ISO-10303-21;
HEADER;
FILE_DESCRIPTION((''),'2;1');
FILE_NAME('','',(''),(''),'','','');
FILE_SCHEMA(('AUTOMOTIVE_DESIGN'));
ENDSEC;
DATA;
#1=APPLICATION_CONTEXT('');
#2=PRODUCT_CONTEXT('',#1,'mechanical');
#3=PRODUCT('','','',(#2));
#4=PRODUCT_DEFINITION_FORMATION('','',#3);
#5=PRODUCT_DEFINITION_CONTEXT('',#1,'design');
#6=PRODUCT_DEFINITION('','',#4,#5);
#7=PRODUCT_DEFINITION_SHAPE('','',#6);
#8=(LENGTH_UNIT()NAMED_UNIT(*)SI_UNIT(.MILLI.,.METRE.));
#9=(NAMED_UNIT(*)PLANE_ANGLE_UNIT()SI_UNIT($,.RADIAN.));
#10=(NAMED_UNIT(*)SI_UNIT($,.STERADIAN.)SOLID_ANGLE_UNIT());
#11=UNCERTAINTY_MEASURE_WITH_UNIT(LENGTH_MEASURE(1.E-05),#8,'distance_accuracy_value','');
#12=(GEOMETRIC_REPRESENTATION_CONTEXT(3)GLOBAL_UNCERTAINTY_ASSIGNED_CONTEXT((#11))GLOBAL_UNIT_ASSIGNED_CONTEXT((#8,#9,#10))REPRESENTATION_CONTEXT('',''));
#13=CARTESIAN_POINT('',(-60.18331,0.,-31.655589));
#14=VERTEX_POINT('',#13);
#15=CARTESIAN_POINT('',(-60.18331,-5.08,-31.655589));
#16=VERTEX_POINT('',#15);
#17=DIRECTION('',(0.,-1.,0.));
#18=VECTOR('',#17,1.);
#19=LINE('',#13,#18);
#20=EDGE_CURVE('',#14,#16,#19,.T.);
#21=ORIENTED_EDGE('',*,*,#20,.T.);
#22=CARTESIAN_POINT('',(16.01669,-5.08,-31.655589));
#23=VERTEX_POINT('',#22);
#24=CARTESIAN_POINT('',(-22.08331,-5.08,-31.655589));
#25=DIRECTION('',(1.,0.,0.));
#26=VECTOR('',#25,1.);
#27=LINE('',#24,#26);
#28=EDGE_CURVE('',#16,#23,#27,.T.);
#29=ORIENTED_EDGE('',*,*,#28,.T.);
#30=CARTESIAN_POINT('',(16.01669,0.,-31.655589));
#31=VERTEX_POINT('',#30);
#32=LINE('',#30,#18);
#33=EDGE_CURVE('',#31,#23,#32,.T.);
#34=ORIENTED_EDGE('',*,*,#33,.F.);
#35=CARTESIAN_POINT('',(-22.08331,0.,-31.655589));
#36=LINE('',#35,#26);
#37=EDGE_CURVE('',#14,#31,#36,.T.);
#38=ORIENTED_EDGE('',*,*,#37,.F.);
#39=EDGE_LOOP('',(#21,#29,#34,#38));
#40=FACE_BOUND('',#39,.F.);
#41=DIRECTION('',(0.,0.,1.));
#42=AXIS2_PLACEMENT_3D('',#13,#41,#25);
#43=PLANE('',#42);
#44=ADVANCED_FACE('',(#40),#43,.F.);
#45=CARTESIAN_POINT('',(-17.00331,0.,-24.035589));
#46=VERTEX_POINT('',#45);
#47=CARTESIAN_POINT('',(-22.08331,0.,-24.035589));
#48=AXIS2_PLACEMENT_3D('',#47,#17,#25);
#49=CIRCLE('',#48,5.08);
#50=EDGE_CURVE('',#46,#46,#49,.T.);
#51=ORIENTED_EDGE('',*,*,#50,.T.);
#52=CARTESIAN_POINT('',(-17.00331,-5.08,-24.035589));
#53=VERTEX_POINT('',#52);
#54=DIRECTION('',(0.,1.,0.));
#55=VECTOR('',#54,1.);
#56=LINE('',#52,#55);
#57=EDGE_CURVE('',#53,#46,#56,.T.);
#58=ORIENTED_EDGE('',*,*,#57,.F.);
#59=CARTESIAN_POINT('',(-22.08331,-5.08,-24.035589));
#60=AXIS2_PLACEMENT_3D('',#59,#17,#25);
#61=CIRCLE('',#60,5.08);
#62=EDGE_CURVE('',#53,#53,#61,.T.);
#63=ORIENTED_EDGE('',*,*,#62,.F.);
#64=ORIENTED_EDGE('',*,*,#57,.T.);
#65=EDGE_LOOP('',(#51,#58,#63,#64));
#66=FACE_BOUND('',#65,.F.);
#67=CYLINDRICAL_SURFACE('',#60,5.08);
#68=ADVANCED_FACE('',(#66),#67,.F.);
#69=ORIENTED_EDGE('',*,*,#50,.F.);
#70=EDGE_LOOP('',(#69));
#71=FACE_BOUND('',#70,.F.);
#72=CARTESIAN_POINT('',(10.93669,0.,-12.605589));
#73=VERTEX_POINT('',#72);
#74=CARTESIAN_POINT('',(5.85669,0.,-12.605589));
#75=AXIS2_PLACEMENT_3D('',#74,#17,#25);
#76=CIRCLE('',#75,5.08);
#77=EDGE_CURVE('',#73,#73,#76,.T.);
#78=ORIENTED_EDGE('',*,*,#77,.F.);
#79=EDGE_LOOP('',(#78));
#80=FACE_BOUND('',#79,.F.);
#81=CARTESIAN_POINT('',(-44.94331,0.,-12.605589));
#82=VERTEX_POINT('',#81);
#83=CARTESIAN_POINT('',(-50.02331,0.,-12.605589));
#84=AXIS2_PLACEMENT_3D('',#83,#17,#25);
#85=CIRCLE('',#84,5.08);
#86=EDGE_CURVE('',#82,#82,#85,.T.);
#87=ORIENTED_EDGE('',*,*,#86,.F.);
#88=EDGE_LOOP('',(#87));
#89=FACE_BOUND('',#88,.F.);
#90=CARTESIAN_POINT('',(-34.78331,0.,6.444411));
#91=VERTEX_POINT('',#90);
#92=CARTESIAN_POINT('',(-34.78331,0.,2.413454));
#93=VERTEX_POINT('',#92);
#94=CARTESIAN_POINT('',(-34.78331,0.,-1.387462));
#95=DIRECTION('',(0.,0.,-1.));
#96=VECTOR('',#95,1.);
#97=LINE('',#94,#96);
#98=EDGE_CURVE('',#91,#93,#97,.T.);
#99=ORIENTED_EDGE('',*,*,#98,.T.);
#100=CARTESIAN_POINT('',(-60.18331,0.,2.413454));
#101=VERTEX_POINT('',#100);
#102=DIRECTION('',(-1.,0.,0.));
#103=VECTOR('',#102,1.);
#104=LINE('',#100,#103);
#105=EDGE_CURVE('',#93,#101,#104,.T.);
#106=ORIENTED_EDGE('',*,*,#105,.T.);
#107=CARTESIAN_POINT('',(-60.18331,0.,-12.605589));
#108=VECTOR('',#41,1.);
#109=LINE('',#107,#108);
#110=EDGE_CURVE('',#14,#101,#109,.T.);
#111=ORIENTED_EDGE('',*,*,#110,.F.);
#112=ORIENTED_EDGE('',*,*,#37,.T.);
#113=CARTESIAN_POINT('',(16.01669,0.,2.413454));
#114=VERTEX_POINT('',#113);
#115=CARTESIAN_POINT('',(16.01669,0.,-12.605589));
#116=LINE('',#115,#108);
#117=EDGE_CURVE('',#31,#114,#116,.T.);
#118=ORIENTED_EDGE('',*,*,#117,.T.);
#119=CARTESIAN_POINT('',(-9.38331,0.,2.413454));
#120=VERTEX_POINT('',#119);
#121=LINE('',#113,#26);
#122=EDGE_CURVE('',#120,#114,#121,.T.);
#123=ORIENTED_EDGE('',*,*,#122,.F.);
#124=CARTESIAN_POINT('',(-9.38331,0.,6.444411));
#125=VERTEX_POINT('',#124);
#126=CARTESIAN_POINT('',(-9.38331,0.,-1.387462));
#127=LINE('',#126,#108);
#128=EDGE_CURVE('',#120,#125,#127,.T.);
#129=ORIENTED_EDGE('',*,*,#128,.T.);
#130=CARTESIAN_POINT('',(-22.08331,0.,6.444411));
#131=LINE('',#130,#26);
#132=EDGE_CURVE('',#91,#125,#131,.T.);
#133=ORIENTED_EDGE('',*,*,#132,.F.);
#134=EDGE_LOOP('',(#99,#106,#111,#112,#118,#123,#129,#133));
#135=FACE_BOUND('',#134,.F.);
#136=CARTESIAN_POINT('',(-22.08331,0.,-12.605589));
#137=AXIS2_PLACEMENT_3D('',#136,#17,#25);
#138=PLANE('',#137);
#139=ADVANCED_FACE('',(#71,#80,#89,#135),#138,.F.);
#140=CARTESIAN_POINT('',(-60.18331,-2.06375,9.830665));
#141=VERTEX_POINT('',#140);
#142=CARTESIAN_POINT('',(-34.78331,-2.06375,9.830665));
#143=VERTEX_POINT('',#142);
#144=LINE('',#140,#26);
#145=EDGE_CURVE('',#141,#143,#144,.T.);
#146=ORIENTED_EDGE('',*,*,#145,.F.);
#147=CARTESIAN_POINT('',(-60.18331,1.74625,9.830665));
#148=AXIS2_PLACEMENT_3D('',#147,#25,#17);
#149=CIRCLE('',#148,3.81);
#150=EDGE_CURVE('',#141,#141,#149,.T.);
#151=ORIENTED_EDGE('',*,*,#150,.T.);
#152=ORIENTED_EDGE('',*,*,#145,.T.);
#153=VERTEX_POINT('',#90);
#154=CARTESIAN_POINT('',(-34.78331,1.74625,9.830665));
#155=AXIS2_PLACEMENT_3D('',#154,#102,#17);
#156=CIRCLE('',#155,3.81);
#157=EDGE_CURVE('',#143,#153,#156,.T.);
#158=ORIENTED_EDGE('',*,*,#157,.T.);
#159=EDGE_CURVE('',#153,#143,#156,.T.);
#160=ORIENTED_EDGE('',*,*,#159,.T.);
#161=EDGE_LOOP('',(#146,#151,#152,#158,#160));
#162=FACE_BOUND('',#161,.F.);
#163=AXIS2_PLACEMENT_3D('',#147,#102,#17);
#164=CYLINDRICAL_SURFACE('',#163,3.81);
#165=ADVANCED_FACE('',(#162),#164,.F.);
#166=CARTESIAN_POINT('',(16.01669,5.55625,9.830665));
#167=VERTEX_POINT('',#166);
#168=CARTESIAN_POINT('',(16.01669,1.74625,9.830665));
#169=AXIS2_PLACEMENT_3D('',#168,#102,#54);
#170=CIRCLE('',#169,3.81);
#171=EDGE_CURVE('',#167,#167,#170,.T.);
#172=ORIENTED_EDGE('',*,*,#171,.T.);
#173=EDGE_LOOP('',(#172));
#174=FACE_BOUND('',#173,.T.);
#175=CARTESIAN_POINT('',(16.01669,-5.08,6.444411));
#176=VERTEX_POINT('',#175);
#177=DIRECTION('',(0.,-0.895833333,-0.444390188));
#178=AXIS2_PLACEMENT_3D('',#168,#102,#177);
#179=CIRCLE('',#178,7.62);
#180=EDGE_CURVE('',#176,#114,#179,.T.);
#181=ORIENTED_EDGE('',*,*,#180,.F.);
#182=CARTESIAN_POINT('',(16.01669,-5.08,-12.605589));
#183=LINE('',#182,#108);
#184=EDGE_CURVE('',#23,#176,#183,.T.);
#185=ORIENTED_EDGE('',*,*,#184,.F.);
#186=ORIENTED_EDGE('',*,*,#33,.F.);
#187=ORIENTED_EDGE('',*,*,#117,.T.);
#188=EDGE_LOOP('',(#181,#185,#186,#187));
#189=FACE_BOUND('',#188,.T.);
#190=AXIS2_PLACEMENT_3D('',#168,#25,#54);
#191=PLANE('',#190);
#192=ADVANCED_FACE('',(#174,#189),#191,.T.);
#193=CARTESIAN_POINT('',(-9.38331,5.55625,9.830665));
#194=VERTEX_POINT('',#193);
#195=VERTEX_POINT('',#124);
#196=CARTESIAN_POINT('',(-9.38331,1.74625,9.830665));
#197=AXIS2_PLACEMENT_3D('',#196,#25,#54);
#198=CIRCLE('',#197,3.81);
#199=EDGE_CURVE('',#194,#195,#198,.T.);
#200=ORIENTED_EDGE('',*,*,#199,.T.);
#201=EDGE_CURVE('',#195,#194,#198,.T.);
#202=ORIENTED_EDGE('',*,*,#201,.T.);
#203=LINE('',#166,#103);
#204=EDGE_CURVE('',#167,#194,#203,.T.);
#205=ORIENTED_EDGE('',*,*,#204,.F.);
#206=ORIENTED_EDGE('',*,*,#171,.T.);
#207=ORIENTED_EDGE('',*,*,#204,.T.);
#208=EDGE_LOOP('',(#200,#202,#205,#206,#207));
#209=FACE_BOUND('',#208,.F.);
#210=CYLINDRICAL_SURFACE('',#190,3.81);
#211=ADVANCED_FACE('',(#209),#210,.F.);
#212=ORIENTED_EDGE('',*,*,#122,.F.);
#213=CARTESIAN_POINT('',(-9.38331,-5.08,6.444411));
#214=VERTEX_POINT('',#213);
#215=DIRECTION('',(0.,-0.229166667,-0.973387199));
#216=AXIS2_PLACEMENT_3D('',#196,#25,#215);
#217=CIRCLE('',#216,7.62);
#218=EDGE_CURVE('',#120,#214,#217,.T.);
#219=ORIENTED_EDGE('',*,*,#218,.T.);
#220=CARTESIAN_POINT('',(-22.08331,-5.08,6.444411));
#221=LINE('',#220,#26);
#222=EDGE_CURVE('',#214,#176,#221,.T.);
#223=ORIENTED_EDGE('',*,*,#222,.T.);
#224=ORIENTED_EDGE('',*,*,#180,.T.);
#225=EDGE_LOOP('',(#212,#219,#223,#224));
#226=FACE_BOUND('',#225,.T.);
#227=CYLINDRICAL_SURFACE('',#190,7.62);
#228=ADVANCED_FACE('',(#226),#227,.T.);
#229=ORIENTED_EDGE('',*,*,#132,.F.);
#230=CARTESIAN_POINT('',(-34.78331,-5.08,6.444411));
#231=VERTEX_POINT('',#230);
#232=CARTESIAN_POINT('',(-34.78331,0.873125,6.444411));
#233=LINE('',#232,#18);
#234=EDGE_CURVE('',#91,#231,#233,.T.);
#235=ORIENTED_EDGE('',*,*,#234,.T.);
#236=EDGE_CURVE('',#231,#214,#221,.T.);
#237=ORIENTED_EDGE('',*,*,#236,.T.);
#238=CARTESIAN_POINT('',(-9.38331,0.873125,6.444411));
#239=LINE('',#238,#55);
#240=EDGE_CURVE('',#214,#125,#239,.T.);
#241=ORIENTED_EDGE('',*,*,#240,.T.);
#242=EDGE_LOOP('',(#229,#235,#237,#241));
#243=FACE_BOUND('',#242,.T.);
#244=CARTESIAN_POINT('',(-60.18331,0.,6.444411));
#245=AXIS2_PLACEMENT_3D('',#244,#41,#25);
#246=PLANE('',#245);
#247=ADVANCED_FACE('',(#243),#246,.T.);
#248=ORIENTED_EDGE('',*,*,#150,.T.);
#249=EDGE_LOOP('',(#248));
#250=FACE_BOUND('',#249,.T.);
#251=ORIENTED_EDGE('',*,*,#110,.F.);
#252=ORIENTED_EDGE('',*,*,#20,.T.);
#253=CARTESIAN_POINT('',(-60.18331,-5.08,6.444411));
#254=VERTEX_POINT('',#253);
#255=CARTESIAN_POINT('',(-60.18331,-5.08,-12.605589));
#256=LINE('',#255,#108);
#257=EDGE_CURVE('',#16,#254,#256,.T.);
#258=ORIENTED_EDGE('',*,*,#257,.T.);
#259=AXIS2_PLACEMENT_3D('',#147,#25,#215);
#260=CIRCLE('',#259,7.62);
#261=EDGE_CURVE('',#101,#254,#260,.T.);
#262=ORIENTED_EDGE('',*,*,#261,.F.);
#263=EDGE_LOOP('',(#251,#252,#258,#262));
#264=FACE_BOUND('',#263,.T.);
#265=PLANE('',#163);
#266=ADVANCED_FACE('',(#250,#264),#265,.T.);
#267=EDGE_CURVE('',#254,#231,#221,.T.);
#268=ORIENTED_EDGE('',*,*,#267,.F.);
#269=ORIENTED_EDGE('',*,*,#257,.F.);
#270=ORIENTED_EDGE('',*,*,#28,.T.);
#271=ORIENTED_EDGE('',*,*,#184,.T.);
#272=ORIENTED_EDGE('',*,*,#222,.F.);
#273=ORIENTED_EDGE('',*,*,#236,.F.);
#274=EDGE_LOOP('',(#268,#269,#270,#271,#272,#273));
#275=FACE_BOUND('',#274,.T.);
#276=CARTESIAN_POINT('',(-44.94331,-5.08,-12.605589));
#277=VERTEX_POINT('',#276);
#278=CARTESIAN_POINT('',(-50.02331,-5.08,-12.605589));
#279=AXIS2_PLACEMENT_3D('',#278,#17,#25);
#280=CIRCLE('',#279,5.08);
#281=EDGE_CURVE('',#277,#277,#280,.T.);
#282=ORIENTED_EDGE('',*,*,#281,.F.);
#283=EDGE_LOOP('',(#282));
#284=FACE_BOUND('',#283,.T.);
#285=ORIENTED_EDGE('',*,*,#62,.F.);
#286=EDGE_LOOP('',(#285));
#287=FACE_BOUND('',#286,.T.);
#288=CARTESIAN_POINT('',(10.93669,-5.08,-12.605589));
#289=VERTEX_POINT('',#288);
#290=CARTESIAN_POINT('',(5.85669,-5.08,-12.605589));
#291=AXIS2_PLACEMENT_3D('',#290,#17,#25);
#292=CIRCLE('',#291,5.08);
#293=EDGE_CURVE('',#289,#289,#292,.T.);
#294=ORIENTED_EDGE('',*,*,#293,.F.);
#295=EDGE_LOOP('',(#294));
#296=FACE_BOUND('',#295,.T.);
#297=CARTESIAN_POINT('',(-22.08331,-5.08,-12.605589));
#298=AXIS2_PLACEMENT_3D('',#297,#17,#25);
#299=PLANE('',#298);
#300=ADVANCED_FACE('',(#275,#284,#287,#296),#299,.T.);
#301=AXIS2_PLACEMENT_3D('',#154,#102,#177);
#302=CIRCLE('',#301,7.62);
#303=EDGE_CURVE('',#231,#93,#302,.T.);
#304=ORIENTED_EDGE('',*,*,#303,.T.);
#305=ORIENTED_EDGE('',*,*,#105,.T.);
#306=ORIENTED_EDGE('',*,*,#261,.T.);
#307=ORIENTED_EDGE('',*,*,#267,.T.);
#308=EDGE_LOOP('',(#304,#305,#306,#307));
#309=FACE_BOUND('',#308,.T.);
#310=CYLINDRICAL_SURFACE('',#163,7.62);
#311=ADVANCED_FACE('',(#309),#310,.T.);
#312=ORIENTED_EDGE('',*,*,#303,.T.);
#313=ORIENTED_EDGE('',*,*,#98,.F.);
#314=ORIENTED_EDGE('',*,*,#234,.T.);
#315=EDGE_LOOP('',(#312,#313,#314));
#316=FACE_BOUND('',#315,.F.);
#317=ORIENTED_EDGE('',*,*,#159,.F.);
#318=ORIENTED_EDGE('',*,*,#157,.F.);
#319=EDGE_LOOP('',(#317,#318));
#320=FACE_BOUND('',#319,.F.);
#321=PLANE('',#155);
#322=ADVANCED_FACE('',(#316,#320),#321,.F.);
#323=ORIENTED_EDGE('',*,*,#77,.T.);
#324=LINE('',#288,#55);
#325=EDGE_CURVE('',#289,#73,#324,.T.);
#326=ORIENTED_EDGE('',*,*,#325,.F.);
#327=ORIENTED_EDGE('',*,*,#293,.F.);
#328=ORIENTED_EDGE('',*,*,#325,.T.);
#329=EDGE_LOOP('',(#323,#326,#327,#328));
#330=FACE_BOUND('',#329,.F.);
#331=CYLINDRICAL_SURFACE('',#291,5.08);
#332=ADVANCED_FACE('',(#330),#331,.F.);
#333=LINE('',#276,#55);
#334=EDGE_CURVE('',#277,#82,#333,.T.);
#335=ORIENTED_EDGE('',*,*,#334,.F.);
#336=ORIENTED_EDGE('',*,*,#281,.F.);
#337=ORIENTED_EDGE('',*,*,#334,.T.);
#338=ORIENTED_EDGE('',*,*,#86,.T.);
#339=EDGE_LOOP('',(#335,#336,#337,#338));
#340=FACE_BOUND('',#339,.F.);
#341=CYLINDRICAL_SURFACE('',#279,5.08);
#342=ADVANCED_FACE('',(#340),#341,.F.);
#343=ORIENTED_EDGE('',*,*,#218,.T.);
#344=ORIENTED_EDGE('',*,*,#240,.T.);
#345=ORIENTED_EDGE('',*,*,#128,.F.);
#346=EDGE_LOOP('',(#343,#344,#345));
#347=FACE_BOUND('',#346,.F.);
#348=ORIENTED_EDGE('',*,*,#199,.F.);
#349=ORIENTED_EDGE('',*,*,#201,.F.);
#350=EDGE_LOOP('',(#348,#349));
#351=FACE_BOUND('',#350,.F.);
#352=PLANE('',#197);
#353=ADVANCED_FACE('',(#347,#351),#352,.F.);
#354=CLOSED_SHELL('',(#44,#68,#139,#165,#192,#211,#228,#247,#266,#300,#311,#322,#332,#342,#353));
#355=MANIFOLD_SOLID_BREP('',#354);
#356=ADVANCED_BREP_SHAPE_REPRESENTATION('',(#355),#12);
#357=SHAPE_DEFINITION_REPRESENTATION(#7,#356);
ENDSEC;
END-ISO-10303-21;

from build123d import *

# Parameters (mm, degrees)
F0_W     = 76.2
F0_H     = 38.1
F1_DEPTH = 5.08
F2_R     = 7.62
F2_R_2   = 3.81
F3_DEPTH = 25.4
F4_R     = 7.62
F4_R_2   = 3.81
F5_DEPTH = 25.4
F6_R     = 5.08
F7_DEPTH = 5.08


# Not quite as in the source:
# - a feature names something its author has since deleted; it is built from what else it names


with BuildPart() as f1:
    # F0 (on Front) → F1 (new body)
    with BuildSketch(Plane.XZ):
        with Locations((-22.0833101058, -12.6055886477)):
            Rectangle(F0_W, F0_H)
    extrude(amount=F1_DEPTH)

    # F2 (on face) → F3 (join)
    with BuildSketch(Plane.YZ.offset(16.0166898942)):
        with Locations((1.74625, 9.8306645822)):
            Circle(F2_R)
        with Locations((1.74625, 9.8306645822)):
            Circle(F2_R_2, mode=Mode.SUBTRACT)
    extrude(amount=-F3_DEPTH)

    # F4 (on face) → F5 (join)
    with BuildSketch(Plane(origin=(-60.1833101058, 0, 0), x_dir=(0, -1, 0), z_dir=(-1, 0, 0))):
        with Locations((-1.74625, 9.8306645822)):
            Circle(F4_R)
        with Locations((-1.74625, 9.8306645822)):
            Circle(F4_R_2, mode=Mode.SUBTRACT)
    extrude(amount=-F5_DEPTH)

    # F6 (on face) → F7 (cut, through all)
    with BuildSketch(Plane.XZ.offset(5.08)):
        with Locations((-50.0233101058, -12.6055886477)):
            Circle(F6_R)
        with Locations((-22.0833101058, -24.0355886477)):
            Circle(F6_R)
        with Locations((5.8566898942, -12.6055886477)):
            Circle(F6_R)
    extrude(amount=-F7_DEPTH, mode=Mode.SUBTRACT)


solid = f1.part
